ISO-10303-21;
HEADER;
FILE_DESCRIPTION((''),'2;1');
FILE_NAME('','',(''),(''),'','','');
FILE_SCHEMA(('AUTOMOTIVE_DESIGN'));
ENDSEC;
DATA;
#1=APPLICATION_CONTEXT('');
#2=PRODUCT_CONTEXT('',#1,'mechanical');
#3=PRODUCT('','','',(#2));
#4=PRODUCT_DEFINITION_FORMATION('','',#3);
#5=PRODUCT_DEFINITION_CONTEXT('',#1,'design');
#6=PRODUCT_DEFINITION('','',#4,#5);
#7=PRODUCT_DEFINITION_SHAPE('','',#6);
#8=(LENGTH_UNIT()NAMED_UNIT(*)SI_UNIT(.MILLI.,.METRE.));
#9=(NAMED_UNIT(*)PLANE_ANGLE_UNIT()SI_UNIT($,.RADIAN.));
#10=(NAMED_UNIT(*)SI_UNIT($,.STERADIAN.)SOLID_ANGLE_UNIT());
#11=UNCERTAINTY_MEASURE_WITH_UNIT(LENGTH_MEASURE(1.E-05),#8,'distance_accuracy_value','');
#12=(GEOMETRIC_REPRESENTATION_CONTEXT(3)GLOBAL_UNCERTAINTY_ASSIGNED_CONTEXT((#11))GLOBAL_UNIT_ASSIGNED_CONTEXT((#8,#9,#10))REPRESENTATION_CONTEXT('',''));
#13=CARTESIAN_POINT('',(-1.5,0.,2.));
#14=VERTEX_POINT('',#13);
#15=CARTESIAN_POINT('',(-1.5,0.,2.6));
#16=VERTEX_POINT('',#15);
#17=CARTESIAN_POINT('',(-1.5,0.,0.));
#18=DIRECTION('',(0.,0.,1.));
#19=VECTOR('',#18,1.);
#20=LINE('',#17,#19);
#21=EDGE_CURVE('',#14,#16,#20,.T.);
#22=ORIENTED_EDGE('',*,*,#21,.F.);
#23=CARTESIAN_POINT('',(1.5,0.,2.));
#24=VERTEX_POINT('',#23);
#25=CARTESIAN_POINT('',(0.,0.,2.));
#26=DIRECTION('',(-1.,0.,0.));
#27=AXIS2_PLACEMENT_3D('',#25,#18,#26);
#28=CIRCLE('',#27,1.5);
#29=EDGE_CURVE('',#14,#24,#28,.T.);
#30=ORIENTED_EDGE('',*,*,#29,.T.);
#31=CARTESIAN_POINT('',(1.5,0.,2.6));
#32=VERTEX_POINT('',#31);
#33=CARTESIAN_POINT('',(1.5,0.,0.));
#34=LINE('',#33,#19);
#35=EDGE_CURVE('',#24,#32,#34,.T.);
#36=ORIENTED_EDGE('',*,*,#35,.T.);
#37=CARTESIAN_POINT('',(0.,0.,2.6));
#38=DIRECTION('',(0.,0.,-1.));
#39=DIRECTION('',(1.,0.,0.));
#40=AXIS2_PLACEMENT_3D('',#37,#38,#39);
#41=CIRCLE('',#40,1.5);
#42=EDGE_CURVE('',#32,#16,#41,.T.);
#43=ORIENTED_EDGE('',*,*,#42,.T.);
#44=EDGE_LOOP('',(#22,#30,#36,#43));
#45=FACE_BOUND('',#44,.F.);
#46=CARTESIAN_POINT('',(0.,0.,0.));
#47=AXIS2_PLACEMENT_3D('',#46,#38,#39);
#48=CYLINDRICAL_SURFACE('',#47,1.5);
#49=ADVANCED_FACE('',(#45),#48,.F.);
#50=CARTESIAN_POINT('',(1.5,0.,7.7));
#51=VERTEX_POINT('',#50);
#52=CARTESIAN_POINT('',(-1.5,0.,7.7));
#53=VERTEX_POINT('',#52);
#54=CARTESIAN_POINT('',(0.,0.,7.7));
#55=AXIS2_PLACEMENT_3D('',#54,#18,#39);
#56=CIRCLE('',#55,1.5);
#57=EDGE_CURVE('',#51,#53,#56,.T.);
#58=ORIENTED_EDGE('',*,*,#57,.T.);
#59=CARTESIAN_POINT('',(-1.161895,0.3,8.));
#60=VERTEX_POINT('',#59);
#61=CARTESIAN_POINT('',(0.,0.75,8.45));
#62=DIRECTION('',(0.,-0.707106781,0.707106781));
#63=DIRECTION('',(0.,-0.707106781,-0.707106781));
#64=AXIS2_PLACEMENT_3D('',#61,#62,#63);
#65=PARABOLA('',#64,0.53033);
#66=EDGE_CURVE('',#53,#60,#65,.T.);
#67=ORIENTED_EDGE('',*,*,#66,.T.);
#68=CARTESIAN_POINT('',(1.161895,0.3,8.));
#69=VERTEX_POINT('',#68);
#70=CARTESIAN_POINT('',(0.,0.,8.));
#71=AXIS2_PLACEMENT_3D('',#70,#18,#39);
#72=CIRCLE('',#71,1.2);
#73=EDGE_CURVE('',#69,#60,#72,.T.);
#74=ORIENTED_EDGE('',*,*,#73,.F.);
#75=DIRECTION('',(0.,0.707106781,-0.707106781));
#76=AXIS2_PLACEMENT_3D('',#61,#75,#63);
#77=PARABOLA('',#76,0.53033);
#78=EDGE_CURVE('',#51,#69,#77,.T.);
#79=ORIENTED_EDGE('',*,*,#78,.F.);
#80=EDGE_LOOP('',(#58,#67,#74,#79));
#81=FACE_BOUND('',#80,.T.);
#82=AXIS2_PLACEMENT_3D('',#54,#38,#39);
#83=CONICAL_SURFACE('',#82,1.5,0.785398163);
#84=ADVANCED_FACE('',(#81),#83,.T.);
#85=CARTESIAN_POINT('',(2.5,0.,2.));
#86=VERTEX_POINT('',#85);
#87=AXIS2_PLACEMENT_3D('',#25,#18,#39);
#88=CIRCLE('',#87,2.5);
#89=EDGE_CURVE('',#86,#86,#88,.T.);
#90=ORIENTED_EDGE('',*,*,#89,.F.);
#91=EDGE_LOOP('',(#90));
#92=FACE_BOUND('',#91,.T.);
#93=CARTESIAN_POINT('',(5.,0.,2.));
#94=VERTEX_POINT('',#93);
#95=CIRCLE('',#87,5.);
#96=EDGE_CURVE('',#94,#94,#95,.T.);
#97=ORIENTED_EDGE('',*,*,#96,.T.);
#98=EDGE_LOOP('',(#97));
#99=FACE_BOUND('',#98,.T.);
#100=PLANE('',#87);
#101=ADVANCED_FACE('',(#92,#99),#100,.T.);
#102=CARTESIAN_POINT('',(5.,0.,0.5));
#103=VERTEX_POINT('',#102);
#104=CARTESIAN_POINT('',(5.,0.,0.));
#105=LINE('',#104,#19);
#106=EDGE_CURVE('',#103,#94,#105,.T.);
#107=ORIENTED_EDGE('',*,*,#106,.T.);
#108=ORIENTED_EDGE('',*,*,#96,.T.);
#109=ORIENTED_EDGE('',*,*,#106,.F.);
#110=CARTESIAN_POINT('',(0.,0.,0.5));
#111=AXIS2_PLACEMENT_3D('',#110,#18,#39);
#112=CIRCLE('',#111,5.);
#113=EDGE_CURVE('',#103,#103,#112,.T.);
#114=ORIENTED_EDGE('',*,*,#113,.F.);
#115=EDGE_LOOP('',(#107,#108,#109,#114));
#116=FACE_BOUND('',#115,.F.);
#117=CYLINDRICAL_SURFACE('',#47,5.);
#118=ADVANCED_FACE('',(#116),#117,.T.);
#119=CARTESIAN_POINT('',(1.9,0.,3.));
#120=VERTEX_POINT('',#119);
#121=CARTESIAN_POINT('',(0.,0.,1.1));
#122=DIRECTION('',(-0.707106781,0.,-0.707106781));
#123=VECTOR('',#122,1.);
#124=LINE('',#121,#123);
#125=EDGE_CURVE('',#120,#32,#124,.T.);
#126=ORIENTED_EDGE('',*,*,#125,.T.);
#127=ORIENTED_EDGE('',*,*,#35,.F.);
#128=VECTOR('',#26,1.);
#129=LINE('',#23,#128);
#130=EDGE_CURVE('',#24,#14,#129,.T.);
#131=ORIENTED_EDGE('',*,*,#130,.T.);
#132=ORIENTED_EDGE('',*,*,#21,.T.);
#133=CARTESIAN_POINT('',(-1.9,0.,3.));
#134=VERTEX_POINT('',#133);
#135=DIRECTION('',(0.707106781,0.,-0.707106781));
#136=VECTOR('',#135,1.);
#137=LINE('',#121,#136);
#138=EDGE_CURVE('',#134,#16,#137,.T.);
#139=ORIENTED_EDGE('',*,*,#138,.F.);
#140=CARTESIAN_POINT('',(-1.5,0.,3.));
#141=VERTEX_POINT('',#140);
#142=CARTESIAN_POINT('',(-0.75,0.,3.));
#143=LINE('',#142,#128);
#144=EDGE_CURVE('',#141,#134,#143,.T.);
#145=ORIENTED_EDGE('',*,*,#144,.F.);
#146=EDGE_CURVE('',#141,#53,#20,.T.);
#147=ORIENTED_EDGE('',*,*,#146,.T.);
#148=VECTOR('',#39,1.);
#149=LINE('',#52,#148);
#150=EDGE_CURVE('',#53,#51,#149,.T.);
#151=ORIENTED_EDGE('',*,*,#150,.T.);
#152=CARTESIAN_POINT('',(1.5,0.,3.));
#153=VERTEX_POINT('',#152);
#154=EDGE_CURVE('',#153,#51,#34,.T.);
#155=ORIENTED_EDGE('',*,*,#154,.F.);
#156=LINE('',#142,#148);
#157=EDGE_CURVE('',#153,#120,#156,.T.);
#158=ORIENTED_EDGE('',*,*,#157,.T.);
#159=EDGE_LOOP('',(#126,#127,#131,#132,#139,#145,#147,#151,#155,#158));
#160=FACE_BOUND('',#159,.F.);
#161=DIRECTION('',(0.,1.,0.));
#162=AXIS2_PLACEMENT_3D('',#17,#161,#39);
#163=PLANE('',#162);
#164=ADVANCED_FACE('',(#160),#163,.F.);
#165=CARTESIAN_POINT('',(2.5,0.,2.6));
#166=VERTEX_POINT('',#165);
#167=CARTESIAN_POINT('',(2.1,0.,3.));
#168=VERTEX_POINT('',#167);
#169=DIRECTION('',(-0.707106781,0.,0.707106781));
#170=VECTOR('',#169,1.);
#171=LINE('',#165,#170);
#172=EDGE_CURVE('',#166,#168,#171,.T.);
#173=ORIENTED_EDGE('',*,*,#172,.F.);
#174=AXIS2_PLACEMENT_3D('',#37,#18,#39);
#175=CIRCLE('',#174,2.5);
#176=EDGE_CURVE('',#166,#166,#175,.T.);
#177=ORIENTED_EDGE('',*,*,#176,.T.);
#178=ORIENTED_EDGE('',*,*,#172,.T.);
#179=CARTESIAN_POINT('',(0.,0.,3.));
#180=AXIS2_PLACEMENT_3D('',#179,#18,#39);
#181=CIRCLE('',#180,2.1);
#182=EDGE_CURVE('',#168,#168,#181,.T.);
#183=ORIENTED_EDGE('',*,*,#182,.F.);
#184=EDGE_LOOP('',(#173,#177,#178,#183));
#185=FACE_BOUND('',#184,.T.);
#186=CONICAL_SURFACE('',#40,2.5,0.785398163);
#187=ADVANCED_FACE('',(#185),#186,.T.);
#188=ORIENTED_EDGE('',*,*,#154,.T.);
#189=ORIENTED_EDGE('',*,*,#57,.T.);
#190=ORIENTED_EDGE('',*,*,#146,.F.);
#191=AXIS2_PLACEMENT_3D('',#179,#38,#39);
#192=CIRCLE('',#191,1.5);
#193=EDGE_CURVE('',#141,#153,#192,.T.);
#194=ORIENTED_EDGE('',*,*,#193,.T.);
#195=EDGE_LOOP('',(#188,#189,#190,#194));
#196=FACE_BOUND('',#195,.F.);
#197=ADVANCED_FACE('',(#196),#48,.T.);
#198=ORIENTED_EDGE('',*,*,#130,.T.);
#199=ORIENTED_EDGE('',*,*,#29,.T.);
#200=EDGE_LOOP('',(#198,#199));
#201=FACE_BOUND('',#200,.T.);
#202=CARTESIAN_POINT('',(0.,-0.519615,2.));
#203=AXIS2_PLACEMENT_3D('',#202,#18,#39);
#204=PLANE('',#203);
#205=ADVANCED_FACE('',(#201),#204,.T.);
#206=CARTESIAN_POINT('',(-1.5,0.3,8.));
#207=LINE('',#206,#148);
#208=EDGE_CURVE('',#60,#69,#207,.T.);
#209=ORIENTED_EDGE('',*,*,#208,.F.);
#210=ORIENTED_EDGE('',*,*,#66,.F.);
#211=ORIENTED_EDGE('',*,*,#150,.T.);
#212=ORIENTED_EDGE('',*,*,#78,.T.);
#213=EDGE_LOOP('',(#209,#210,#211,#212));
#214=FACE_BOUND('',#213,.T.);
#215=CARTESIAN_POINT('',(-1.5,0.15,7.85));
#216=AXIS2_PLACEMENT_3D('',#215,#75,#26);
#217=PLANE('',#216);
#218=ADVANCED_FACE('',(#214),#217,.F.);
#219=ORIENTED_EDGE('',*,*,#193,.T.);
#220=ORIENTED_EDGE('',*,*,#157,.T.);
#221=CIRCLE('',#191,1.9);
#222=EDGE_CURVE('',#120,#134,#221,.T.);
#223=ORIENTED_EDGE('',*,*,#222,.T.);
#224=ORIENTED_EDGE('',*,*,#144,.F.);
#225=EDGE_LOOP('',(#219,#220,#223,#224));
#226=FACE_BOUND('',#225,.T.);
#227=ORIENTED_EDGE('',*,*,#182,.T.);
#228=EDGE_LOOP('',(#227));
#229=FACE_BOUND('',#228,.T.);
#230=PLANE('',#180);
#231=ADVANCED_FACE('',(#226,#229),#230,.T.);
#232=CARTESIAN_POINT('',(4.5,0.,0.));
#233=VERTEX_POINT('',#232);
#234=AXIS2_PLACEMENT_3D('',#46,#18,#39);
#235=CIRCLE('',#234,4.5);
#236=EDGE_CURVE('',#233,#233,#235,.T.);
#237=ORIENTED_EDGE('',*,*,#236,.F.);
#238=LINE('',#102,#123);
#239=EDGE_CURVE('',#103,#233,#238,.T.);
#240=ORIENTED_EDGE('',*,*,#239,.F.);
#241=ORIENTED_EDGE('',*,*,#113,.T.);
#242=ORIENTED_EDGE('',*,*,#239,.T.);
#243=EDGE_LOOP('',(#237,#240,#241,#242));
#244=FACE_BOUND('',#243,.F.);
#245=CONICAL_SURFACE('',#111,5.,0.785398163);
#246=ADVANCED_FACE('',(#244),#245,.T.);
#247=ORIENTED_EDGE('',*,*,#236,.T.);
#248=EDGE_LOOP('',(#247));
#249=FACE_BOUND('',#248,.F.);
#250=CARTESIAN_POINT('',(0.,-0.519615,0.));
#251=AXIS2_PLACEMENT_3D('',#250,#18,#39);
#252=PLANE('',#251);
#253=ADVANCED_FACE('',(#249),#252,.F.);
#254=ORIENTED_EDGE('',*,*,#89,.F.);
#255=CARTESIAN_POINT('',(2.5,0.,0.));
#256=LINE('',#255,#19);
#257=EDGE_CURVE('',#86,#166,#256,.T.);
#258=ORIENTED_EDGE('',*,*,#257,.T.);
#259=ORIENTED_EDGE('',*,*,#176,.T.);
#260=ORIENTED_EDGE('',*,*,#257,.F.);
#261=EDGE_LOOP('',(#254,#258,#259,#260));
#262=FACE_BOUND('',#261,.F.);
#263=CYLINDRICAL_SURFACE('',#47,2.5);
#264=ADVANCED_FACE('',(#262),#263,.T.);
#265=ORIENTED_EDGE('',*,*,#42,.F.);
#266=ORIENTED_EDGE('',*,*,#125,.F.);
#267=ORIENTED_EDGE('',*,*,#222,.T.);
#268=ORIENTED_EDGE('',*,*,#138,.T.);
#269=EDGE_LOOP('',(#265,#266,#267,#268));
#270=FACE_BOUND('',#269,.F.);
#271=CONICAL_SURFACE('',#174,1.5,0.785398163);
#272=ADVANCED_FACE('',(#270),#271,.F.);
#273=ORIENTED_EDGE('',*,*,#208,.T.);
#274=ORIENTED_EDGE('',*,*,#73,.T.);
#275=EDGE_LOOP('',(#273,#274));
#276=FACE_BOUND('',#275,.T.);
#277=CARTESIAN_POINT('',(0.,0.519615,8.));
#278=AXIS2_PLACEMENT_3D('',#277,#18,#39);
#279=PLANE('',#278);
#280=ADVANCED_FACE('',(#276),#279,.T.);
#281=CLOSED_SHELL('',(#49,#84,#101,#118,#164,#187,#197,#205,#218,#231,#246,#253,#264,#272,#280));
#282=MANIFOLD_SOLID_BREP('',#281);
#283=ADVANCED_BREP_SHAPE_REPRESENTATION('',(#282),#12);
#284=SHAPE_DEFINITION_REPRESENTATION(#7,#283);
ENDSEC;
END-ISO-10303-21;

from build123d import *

# Parameters (mm, degrees)
F2_DEPTH = 8
F1_R     = 2.5
F4_DEPTH = 3
F1_R_2   = 5
F6_DEPTH = 2
F7_DEPTH = 2
F8_SIZE  = 0.4
F9_SIZE  = 0.3
F10_SIZE = 0.5
F11_SIZE = 0.4


with BuildPart() as f2:
    # F1 (on Top) → F2 (new body)
    with BuildSketch(Plane.XY):
        with BuildLine():
            Line((-1.5, 0), (1.5, 0))
            ThreePointArc((1.5, 0), (0, 1.5), (-1.5, 0))
        make_face()
    extrude(amount=F2_DEPTH)

    # F1 (on Top) → F4 (join)
    with BuildSketch(Plane.XY):
        Circle(F1_R)
        with BuildLine():
            ThreePointArc((-1.5, 0), (0, 1.5), (1.5, 0))
            ThreePointArc((1.5, 0), (0, -1.5), (-1.5, 0))
        make_face(mode=Mode.SUBTRACT)
    extrude(amount=F4_DEPTH)

    # F1 (on Top) → F6 (join)
    with BuildSketch(Plane.XY):
        Circle(F1_R_2)
        Circle(F1_R, mode=Mode.SUBTRACT)
    extrude(amount=F6_DEPTH)

    # F1 (on Top) → F7 (join)
    with BuildSketch(Plane.XY):
        with BuildLine():
            ThreePointArc((-1.5, 0), (0, -1.5), (1.5, 0))
            Line((1.5, 0), (-1.5, 0))
        make_face()
    extrude(amount=F7_DEPTH)

    # F8
    f8_edges = [f2.edges().sort_by_distance(p)[0] for p in [
        (-2.5, 0, 3),
    ]]
    chamfer(f8_edges, length=F8_SIZE)

    # F9
    f9_edges = [f2.edges().sort_by_distance(p)[0] for p in [
        (0, 1.5, 8),
        (0, 0, 8),
    ]]
    chamfer(f9_edges, length=F9_SIZE)

    # F10
    f10_edges = [f2.edges().sort_by_distance(p)[0] for p in [
        (-5, 0, 0),
    ]]
    chamfer(f10_edges, length=F10_SIZE)

    # F11
    f11_edges = [f2.edges().sort_by_distance(p)[0] for p in [
        (0, -1.5, 3),
    ]]
    chamfer(f11_edges, length=F11_SIZE)


solid = f2.part
